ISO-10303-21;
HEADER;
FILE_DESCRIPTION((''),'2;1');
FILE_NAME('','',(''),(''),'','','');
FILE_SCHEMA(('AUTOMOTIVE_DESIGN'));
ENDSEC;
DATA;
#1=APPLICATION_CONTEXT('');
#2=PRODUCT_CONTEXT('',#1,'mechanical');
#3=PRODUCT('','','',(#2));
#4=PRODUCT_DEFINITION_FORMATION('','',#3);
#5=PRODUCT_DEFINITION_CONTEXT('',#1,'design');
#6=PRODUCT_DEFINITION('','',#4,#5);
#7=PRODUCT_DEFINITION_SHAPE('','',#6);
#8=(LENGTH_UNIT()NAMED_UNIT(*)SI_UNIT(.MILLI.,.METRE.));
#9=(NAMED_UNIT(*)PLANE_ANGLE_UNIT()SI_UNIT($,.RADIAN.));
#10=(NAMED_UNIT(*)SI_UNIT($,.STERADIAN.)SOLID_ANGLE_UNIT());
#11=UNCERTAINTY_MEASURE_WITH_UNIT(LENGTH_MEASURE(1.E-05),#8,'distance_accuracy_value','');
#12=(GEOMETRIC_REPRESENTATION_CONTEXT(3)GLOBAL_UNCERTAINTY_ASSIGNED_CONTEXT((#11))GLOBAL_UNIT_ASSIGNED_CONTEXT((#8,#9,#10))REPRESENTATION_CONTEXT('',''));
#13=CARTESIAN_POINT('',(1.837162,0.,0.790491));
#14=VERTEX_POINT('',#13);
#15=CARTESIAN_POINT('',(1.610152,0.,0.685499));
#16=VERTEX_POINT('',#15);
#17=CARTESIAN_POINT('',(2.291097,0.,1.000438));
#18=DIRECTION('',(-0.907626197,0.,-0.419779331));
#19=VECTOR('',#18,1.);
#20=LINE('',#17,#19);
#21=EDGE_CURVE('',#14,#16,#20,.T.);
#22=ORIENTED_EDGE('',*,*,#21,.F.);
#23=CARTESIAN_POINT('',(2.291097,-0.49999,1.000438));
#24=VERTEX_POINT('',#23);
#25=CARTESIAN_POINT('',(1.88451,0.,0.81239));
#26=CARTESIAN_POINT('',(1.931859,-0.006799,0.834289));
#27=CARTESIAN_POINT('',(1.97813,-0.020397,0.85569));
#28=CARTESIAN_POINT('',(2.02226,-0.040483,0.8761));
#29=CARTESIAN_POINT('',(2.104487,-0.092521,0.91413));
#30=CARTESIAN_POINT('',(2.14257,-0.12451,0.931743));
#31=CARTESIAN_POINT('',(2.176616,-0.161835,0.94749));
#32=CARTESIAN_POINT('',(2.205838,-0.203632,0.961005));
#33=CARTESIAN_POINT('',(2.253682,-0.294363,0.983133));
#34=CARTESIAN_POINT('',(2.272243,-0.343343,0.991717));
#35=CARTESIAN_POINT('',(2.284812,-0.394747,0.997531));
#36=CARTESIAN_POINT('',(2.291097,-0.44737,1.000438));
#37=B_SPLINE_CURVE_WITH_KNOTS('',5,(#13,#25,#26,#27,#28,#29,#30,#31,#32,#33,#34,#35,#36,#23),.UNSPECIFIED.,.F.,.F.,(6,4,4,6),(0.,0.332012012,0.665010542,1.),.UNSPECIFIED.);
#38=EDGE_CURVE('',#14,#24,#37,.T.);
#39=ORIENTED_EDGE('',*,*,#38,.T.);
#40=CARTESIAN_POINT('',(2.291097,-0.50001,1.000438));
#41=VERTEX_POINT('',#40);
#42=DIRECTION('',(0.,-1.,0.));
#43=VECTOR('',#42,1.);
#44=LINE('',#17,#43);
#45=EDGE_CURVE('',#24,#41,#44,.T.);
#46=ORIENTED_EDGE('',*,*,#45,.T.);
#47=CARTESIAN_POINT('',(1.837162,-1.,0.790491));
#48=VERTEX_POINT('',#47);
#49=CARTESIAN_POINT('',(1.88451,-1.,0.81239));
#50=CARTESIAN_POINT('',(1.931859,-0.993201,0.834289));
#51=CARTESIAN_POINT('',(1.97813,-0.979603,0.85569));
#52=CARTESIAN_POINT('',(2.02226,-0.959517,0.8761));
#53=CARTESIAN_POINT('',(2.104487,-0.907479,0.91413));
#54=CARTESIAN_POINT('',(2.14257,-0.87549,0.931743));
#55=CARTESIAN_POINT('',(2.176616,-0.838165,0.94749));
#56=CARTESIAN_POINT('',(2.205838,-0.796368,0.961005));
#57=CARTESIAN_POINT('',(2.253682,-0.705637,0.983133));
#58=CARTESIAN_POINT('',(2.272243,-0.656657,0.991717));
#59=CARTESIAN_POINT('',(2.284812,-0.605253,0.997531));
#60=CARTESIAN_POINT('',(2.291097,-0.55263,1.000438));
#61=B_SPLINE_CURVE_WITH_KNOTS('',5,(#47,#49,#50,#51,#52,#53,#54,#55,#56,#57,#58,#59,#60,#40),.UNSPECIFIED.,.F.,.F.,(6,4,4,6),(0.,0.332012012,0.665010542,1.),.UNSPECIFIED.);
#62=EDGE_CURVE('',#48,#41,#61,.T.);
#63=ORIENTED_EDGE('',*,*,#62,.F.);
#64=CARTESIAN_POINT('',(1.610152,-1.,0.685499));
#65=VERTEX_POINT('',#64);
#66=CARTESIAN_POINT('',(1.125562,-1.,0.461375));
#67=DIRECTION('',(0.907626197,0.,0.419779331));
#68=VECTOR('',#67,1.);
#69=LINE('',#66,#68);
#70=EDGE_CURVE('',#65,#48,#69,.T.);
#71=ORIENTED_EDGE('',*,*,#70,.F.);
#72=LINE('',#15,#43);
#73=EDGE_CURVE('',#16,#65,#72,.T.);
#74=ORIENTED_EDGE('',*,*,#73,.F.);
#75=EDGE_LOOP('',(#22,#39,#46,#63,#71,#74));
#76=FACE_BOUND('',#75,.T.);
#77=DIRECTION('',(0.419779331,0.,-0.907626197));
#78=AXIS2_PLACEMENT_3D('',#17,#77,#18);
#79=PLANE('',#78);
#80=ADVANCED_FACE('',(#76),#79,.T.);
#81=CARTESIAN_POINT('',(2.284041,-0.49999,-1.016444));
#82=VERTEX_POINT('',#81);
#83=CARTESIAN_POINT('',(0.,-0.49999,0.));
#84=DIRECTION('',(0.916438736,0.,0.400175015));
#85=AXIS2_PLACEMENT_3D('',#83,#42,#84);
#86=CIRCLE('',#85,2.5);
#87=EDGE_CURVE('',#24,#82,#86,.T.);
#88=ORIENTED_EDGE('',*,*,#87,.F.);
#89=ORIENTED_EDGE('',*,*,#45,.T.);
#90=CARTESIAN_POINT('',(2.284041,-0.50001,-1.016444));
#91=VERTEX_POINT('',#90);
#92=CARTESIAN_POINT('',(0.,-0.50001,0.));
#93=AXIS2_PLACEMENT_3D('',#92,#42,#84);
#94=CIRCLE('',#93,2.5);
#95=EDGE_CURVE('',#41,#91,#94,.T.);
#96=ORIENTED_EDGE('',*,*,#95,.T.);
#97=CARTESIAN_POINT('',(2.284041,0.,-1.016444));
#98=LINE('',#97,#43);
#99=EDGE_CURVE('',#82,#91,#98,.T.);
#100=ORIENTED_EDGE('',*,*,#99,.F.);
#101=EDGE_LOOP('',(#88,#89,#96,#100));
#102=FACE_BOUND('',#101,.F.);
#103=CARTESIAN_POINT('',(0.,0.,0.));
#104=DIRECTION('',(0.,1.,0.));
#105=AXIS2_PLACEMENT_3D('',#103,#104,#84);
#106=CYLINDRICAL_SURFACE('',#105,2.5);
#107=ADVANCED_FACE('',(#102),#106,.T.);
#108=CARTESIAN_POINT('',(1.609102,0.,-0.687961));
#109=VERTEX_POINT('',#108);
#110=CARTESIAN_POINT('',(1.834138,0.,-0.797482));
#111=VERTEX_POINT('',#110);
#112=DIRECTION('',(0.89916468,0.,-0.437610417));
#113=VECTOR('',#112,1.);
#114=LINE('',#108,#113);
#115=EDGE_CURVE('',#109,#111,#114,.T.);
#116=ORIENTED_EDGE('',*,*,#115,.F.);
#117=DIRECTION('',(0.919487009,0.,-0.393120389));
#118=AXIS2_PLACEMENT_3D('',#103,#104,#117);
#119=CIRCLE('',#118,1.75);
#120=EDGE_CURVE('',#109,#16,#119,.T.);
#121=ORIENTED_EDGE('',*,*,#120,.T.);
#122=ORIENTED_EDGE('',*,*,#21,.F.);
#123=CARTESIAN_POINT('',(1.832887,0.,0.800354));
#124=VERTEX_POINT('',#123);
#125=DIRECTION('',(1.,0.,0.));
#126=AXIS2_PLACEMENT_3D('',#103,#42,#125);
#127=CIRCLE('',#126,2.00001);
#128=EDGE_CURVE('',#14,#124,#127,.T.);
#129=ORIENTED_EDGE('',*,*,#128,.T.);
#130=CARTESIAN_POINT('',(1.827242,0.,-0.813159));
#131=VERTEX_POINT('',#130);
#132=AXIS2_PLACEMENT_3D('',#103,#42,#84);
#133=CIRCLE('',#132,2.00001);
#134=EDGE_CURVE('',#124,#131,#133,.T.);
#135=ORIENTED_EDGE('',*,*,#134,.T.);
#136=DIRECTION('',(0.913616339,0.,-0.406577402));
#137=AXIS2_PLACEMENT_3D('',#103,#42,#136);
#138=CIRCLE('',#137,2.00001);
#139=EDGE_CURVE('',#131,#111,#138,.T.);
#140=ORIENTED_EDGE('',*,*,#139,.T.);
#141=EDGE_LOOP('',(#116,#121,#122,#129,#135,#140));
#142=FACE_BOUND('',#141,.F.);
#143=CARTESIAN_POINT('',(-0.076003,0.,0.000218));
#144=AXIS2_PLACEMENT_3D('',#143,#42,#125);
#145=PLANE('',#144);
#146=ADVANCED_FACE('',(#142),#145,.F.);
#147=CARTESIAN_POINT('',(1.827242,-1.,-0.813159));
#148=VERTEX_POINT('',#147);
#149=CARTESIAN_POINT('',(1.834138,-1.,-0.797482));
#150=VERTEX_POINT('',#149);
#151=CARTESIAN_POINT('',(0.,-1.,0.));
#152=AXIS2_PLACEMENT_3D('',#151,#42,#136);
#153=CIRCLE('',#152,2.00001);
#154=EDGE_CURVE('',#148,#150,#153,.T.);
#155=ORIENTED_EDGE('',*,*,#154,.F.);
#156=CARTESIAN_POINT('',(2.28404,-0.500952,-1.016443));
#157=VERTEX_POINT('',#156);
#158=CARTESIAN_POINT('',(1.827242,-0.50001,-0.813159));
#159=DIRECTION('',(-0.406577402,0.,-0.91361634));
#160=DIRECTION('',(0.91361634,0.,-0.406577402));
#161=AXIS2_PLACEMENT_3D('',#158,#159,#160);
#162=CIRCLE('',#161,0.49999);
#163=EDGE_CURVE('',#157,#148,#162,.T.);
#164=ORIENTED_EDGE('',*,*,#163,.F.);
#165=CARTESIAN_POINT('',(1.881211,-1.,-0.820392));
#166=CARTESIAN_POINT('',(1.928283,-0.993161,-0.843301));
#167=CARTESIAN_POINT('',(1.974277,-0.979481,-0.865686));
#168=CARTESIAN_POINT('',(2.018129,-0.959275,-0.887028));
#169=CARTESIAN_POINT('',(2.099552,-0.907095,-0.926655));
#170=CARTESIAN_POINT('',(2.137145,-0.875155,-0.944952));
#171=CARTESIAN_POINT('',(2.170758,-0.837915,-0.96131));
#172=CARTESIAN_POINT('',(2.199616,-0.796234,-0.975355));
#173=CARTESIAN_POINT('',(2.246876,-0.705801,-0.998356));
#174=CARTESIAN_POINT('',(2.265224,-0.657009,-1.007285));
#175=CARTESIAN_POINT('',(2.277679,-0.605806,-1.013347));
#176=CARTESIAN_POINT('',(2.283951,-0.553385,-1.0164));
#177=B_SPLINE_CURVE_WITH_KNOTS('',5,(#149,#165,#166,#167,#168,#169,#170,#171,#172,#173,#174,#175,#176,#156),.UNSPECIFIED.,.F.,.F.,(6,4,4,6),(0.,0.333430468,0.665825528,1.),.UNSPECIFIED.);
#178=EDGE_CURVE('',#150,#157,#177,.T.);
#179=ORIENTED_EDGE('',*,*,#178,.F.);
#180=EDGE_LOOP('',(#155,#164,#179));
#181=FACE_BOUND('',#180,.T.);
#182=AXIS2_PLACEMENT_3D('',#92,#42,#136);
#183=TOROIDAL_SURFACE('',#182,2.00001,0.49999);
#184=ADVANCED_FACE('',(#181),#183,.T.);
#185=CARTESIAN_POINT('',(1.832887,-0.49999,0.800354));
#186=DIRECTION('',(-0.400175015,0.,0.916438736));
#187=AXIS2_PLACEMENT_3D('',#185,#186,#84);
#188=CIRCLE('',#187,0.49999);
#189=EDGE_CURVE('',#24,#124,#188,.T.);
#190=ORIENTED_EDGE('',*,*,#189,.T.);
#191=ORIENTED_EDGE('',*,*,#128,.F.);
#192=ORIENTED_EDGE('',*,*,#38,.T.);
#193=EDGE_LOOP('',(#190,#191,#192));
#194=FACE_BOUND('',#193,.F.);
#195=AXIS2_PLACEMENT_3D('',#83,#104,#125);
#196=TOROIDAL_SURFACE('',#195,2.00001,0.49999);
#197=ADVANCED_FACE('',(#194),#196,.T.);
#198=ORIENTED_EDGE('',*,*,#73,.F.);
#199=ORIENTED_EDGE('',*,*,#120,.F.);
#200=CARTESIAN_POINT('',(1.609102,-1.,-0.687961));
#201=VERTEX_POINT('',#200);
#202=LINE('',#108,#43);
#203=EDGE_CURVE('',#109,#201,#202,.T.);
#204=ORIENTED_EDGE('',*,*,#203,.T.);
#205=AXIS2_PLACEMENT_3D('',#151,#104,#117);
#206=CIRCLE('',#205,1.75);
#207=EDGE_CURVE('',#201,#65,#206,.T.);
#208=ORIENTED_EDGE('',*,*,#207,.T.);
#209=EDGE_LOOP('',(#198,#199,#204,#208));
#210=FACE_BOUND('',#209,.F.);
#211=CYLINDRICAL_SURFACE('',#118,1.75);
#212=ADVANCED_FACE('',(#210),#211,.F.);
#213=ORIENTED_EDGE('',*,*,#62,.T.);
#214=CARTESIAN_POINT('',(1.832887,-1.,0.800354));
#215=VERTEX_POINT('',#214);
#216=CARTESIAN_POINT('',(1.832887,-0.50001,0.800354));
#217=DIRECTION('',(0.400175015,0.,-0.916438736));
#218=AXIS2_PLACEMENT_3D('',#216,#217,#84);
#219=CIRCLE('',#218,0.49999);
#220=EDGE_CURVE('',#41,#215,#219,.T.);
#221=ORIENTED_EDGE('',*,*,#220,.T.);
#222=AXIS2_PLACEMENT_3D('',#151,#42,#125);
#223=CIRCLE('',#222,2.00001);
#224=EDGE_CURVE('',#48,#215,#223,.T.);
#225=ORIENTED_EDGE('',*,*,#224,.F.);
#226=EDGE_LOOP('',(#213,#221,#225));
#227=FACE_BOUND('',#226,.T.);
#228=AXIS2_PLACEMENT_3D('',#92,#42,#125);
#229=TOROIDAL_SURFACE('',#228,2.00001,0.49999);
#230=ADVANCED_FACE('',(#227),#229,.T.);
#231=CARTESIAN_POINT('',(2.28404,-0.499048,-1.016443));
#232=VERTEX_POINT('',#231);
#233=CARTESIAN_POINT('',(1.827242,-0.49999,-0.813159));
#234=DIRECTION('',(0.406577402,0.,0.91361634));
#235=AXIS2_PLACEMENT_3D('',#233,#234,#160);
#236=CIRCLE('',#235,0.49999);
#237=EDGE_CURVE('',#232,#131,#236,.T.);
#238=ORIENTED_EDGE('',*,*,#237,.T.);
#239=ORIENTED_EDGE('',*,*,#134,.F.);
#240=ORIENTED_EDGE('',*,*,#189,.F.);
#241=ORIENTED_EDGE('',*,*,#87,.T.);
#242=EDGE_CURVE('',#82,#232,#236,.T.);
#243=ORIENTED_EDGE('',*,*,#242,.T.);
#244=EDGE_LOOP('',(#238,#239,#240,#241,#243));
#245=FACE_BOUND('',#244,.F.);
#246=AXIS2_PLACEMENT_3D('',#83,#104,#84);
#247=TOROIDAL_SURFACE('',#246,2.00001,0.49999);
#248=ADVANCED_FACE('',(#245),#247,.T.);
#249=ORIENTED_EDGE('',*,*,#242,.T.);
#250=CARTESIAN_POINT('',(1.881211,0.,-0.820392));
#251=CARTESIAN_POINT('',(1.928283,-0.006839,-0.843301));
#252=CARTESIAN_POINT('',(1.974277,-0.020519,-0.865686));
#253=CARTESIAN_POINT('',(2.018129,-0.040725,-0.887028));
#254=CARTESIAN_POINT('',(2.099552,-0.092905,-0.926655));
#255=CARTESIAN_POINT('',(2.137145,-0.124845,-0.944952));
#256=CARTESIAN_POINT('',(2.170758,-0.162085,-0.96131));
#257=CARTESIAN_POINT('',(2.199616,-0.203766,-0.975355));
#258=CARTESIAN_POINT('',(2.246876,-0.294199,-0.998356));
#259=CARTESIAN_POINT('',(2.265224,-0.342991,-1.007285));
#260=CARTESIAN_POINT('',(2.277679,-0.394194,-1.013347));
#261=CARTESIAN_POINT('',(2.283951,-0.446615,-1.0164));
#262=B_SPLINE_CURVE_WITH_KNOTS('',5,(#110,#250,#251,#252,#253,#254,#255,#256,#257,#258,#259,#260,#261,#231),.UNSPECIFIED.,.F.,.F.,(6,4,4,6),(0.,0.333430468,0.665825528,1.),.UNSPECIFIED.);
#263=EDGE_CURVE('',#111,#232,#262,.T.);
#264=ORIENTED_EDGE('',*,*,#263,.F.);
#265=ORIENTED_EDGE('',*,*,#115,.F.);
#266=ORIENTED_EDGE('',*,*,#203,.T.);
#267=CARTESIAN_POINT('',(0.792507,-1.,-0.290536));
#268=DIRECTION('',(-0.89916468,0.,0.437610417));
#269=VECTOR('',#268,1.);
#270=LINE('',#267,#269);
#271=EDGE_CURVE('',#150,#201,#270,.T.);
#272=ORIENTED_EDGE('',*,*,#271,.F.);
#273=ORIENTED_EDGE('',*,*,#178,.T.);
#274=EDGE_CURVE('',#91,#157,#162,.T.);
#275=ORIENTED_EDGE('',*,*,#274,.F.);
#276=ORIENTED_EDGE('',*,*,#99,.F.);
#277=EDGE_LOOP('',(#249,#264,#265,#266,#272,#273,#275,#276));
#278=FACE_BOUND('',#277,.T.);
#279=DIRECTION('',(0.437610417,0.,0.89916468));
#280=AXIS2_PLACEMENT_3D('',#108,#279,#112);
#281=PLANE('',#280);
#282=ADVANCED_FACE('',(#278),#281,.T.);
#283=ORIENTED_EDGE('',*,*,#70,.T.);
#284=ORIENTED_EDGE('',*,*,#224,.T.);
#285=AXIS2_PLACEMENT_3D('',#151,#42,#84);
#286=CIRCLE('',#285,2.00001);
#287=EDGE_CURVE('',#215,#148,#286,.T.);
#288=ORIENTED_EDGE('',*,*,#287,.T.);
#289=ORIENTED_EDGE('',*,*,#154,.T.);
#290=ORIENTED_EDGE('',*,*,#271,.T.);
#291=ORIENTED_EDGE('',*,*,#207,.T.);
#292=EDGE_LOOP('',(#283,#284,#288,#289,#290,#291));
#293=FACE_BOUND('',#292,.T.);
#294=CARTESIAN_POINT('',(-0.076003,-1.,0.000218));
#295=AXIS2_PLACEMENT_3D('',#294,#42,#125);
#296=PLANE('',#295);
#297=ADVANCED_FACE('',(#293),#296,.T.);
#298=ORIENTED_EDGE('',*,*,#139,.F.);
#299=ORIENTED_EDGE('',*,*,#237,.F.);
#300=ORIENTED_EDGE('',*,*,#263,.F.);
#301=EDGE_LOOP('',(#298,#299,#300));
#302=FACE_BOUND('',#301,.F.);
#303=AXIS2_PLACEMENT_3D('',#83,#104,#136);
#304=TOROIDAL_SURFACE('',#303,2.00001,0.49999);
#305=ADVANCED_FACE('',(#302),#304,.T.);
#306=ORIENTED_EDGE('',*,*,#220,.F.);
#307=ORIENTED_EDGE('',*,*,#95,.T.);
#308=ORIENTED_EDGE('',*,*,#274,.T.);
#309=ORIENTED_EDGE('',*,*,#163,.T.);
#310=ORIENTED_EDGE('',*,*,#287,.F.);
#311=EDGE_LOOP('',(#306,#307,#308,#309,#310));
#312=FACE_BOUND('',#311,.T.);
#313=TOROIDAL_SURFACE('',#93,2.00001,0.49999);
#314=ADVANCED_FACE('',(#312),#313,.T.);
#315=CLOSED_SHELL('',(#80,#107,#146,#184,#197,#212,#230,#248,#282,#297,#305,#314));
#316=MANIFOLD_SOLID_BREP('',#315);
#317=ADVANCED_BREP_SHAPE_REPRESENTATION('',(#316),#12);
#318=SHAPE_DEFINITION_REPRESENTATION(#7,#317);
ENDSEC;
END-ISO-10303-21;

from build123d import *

# Parameters (mm, degrees)
F1_DEPTH = 1
F2_R     = 0.49999
F3_DEPTH = 25


# Not quite as in the source:
# - a fillet or chamfer is up to 0.001 mm smaller than in the source, because OpenCascade refuses the exact size


with BuildPart() as f1:
    # F0 (on Front) → F1 (new body)
    with BuildSketch(Plane.XZ):
        with BuildLine():
            Line((1.6101524701, 0.6854991051), (2.2910968404, 1.0004375382))
            ThreePointArc((2.2910968404, 1.0004375382), (-2.4999847011, 0.0087461138), (2.2840408488, -1.016443506))
            Line((2.2840408488, -1.016443506), (1.6091022659, -0.6879606804))
            ThreePointArc((1.6091022659, -0.6879606804), (-1.7499994884, 0.001338122), (1.6101524701, 0.6854991051))
        make_face()
        with BuildLine():
            ThreePointArc((2.2840408488, -1.016443506), (2.4454142923, -0.5195661065), (2.5, 0))
            ThreePointArc((2.5, 0), (2.4472170011, 0.5110077783), (2.2910968404, 1.0004375382))
            Line((2.2910968404, 1.0004375382), (1.6101524701, 0.6854991051))
            ThreePointArc((1.6101524701, 0.6854991051), (1.714681723, 0.3498093605), (1.75, 0))
            ThreePointArc((1.75, 0), (1.7144137431, -0.3511203744), (1.6091022659, -0.6879606804))
            Line((1.6091022659, -0.6879606804), (2.2840408488, -1.016443506))
        make_face()
    extrude(amount=F1_DEPTH)

    # F2 (radius 0.5 in the source; OpenCascade refuses exactly that, so slightly less here)
    f2_edges = [f1.edges().sort_by_distance(p)[0] for p in [
        (-2.284041, -1, 1.016444),
        (-2.284041, 0, 1.016444),
    ]]
    fillet(f2_edges, radius=F2_R)

    # F0 (on Front) → F3 (cut)
    with BuildSketch(Plane.XZ):
        with BuildLine():
            ThreePointArc((2.2840408488, -1.016443506), (2.4454142923, -0.5195661065), (2.5, 0))
            ThreePointArc((2.5, 0), (2.4472170011, 0.5110077783), (2.2910968404, 1.0004375382))
            Line((2.2910968404, 1.0004375382), (1.6101524701, 0.6854991051))
            ThreePointArc((1.6101524701, 0.6854991051), (1.714681723, 0.3498093605), (1.75, 0))
            ThreePointArc((1.75, 0), (1.7144137431, -0.3511203744), (1.6091022659, -0.6879606804))
            Line((1.6091022659, -0.6879606804), (2.2840408488, -1.016443506))
        make_face()
    extrude(amount=F3_DEPTH, mode=Mode.SUBTRACT)


solid = f1.part
